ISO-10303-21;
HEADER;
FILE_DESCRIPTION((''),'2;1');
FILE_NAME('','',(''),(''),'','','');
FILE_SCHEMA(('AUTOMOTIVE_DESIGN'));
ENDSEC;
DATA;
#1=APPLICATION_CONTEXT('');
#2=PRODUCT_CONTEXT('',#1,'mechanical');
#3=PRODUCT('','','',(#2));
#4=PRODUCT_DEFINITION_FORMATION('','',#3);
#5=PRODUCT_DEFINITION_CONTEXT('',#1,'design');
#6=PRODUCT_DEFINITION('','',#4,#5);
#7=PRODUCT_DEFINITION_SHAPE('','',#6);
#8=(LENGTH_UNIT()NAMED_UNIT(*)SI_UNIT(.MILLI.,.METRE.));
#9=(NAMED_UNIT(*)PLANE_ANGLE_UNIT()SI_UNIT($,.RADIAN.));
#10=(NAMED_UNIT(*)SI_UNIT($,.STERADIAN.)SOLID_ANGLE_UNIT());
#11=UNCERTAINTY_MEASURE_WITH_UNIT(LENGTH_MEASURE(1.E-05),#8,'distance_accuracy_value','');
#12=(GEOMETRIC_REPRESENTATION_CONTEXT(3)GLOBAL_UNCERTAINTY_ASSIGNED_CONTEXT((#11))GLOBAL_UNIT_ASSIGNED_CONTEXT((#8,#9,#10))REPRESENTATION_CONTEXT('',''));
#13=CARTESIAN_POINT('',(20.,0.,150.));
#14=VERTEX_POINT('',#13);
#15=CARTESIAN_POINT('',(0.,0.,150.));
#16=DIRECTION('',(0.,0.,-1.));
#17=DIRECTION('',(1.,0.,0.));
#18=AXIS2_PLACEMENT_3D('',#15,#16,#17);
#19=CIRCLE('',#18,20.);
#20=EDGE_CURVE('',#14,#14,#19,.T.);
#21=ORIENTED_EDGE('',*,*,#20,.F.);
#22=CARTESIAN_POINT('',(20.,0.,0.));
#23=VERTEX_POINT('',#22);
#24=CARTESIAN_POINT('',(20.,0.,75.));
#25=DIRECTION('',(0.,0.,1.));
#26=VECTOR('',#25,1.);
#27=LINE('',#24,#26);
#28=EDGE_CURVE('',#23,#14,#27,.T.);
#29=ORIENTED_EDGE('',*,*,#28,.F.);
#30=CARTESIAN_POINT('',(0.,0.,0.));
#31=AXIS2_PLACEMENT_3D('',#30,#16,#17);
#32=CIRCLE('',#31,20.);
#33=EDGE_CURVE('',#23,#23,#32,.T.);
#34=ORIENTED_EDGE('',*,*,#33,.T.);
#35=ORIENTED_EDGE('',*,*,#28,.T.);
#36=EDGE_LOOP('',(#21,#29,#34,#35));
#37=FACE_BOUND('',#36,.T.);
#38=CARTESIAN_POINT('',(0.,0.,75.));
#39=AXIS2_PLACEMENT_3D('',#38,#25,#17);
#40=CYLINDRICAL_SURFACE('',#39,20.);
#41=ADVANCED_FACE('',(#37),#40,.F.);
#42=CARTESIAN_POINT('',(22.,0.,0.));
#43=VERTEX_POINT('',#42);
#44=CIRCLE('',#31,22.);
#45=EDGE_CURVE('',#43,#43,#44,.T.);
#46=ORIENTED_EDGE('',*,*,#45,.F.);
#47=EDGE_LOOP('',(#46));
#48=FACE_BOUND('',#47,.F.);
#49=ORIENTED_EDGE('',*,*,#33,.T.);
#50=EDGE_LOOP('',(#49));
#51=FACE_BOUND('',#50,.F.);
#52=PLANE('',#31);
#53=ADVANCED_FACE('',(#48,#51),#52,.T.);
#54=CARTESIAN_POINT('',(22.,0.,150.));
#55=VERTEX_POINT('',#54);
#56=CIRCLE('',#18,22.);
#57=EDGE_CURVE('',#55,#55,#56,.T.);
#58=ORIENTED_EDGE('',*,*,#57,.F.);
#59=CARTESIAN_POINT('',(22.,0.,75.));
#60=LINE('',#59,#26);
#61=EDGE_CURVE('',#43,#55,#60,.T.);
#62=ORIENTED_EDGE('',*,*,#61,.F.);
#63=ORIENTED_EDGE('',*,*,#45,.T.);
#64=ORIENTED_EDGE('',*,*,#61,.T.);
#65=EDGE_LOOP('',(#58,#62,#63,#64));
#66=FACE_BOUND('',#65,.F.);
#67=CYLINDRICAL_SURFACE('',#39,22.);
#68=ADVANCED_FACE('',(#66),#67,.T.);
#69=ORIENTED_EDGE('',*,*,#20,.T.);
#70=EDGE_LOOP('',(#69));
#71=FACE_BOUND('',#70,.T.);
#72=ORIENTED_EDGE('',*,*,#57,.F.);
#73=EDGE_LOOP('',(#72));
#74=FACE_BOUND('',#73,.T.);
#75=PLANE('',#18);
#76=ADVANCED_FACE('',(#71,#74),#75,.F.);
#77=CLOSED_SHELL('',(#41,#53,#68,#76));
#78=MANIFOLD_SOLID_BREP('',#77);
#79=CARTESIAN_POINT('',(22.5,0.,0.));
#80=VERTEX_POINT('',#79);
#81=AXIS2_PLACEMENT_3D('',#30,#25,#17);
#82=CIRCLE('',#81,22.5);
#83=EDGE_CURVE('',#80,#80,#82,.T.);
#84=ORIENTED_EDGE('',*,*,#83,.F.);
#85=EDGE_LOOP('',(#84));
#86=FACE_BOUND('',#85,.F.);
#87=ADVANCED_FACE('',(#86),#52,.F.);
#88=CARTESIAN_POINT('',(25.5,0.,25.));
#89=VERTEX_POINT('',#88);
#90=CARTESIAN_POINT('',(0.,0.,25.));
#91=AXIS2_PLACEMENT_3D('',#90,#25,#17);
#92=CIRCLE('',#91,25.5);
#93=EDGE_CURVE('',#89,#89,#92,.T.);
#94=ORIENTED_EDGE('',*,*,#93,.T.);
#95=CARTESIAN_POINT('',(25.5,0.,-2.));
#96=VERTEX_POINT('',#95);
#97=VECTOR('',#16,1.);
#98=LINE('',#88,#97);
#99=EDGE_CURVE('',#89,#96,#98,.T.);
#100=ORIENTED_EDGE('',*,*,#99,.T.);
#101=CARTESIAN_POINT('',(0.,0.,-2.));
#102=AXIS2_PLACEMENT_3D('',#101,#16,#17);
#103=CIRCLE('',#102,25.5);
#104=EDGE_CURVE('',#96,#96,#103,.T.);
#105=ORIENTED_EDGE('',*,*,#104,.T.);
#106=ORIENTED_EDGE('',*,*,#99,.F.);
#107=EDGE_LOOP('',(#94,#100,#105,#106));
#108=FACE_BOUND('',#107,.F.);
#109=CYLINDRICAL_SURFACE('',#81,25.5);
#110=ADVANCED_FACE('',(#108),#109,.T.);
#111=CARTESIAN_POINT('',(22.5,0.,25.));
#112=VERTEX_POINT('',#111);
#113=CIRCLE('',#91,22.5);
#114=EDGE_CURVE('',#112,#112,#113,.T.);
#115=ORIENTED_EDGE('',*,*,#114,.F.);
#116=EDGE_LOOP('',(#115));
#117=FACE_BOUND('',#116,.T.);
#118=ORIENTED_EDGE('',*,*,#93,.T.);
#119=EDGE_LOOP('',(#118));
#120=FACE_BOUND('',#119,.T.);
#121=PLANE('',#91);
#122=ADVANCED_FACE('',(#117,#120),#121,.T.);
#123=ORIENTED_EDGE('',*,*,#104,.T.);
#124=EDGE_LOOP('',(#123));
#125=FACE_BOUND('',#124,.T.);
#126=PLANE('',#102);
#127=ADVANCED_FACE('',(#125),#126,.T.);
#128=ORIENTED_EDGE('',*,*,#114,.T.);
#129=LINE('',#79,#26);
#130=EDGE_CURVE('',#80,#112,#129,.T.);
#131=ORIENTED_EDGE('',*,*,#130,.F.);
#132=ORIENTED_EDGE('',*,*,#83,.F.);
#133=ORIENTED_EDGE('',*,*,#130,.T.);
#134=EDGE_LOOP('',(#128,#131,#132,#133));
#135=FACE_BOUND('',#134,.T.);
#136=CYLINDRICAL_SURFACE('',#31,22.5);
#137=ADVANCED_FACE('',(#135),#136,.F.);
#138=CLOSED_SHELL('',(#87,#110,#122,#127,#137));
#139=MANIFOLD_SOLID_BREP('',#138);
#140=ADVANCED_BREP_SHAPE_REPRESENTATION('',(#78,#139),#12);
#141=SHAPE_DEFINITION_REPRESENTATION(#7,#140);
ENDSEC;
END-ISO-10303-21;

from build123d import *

# Parameters (mm, degrees)
F0_W     = 2
F0_H     = 150
F3_R     = 25.5
F3_R_2   = 22.5
F4_DEPTH = 25
F5_R     = 25.5
F6_DEPTH = 2


with BuildPart() as f1:
    # F0 (on Front) → F1 (revolve)
    with BuildSketch(Plane.XZ):
        with Locations((21, 75)):
            Rectangle(F0_W, F0_H)
    revolve(axis=Axis((0, 0, -12.3759636598), (0, 0, -1)))


with BuildPart() as f4:
    # F3 (on Top) → F4 (new body)
    with BuildSketch(Plane.XY):
        Circle(F3_R)
        Circle(F3_R_2, mode=Mode.SUBTRACT)
    extrude(amount=F4_DEPTH)

    # F5 (on face) → F6 (join)
    with BuildSketch(Plane(origin=(0, 0, 0), x_dir=(1, 0, 0), z_dir=(0, 0, -1))):
        Circle(F5_R)
    extrude(amount=F6_DEPTH)


solid = Compound([f1.part, f4.part])
